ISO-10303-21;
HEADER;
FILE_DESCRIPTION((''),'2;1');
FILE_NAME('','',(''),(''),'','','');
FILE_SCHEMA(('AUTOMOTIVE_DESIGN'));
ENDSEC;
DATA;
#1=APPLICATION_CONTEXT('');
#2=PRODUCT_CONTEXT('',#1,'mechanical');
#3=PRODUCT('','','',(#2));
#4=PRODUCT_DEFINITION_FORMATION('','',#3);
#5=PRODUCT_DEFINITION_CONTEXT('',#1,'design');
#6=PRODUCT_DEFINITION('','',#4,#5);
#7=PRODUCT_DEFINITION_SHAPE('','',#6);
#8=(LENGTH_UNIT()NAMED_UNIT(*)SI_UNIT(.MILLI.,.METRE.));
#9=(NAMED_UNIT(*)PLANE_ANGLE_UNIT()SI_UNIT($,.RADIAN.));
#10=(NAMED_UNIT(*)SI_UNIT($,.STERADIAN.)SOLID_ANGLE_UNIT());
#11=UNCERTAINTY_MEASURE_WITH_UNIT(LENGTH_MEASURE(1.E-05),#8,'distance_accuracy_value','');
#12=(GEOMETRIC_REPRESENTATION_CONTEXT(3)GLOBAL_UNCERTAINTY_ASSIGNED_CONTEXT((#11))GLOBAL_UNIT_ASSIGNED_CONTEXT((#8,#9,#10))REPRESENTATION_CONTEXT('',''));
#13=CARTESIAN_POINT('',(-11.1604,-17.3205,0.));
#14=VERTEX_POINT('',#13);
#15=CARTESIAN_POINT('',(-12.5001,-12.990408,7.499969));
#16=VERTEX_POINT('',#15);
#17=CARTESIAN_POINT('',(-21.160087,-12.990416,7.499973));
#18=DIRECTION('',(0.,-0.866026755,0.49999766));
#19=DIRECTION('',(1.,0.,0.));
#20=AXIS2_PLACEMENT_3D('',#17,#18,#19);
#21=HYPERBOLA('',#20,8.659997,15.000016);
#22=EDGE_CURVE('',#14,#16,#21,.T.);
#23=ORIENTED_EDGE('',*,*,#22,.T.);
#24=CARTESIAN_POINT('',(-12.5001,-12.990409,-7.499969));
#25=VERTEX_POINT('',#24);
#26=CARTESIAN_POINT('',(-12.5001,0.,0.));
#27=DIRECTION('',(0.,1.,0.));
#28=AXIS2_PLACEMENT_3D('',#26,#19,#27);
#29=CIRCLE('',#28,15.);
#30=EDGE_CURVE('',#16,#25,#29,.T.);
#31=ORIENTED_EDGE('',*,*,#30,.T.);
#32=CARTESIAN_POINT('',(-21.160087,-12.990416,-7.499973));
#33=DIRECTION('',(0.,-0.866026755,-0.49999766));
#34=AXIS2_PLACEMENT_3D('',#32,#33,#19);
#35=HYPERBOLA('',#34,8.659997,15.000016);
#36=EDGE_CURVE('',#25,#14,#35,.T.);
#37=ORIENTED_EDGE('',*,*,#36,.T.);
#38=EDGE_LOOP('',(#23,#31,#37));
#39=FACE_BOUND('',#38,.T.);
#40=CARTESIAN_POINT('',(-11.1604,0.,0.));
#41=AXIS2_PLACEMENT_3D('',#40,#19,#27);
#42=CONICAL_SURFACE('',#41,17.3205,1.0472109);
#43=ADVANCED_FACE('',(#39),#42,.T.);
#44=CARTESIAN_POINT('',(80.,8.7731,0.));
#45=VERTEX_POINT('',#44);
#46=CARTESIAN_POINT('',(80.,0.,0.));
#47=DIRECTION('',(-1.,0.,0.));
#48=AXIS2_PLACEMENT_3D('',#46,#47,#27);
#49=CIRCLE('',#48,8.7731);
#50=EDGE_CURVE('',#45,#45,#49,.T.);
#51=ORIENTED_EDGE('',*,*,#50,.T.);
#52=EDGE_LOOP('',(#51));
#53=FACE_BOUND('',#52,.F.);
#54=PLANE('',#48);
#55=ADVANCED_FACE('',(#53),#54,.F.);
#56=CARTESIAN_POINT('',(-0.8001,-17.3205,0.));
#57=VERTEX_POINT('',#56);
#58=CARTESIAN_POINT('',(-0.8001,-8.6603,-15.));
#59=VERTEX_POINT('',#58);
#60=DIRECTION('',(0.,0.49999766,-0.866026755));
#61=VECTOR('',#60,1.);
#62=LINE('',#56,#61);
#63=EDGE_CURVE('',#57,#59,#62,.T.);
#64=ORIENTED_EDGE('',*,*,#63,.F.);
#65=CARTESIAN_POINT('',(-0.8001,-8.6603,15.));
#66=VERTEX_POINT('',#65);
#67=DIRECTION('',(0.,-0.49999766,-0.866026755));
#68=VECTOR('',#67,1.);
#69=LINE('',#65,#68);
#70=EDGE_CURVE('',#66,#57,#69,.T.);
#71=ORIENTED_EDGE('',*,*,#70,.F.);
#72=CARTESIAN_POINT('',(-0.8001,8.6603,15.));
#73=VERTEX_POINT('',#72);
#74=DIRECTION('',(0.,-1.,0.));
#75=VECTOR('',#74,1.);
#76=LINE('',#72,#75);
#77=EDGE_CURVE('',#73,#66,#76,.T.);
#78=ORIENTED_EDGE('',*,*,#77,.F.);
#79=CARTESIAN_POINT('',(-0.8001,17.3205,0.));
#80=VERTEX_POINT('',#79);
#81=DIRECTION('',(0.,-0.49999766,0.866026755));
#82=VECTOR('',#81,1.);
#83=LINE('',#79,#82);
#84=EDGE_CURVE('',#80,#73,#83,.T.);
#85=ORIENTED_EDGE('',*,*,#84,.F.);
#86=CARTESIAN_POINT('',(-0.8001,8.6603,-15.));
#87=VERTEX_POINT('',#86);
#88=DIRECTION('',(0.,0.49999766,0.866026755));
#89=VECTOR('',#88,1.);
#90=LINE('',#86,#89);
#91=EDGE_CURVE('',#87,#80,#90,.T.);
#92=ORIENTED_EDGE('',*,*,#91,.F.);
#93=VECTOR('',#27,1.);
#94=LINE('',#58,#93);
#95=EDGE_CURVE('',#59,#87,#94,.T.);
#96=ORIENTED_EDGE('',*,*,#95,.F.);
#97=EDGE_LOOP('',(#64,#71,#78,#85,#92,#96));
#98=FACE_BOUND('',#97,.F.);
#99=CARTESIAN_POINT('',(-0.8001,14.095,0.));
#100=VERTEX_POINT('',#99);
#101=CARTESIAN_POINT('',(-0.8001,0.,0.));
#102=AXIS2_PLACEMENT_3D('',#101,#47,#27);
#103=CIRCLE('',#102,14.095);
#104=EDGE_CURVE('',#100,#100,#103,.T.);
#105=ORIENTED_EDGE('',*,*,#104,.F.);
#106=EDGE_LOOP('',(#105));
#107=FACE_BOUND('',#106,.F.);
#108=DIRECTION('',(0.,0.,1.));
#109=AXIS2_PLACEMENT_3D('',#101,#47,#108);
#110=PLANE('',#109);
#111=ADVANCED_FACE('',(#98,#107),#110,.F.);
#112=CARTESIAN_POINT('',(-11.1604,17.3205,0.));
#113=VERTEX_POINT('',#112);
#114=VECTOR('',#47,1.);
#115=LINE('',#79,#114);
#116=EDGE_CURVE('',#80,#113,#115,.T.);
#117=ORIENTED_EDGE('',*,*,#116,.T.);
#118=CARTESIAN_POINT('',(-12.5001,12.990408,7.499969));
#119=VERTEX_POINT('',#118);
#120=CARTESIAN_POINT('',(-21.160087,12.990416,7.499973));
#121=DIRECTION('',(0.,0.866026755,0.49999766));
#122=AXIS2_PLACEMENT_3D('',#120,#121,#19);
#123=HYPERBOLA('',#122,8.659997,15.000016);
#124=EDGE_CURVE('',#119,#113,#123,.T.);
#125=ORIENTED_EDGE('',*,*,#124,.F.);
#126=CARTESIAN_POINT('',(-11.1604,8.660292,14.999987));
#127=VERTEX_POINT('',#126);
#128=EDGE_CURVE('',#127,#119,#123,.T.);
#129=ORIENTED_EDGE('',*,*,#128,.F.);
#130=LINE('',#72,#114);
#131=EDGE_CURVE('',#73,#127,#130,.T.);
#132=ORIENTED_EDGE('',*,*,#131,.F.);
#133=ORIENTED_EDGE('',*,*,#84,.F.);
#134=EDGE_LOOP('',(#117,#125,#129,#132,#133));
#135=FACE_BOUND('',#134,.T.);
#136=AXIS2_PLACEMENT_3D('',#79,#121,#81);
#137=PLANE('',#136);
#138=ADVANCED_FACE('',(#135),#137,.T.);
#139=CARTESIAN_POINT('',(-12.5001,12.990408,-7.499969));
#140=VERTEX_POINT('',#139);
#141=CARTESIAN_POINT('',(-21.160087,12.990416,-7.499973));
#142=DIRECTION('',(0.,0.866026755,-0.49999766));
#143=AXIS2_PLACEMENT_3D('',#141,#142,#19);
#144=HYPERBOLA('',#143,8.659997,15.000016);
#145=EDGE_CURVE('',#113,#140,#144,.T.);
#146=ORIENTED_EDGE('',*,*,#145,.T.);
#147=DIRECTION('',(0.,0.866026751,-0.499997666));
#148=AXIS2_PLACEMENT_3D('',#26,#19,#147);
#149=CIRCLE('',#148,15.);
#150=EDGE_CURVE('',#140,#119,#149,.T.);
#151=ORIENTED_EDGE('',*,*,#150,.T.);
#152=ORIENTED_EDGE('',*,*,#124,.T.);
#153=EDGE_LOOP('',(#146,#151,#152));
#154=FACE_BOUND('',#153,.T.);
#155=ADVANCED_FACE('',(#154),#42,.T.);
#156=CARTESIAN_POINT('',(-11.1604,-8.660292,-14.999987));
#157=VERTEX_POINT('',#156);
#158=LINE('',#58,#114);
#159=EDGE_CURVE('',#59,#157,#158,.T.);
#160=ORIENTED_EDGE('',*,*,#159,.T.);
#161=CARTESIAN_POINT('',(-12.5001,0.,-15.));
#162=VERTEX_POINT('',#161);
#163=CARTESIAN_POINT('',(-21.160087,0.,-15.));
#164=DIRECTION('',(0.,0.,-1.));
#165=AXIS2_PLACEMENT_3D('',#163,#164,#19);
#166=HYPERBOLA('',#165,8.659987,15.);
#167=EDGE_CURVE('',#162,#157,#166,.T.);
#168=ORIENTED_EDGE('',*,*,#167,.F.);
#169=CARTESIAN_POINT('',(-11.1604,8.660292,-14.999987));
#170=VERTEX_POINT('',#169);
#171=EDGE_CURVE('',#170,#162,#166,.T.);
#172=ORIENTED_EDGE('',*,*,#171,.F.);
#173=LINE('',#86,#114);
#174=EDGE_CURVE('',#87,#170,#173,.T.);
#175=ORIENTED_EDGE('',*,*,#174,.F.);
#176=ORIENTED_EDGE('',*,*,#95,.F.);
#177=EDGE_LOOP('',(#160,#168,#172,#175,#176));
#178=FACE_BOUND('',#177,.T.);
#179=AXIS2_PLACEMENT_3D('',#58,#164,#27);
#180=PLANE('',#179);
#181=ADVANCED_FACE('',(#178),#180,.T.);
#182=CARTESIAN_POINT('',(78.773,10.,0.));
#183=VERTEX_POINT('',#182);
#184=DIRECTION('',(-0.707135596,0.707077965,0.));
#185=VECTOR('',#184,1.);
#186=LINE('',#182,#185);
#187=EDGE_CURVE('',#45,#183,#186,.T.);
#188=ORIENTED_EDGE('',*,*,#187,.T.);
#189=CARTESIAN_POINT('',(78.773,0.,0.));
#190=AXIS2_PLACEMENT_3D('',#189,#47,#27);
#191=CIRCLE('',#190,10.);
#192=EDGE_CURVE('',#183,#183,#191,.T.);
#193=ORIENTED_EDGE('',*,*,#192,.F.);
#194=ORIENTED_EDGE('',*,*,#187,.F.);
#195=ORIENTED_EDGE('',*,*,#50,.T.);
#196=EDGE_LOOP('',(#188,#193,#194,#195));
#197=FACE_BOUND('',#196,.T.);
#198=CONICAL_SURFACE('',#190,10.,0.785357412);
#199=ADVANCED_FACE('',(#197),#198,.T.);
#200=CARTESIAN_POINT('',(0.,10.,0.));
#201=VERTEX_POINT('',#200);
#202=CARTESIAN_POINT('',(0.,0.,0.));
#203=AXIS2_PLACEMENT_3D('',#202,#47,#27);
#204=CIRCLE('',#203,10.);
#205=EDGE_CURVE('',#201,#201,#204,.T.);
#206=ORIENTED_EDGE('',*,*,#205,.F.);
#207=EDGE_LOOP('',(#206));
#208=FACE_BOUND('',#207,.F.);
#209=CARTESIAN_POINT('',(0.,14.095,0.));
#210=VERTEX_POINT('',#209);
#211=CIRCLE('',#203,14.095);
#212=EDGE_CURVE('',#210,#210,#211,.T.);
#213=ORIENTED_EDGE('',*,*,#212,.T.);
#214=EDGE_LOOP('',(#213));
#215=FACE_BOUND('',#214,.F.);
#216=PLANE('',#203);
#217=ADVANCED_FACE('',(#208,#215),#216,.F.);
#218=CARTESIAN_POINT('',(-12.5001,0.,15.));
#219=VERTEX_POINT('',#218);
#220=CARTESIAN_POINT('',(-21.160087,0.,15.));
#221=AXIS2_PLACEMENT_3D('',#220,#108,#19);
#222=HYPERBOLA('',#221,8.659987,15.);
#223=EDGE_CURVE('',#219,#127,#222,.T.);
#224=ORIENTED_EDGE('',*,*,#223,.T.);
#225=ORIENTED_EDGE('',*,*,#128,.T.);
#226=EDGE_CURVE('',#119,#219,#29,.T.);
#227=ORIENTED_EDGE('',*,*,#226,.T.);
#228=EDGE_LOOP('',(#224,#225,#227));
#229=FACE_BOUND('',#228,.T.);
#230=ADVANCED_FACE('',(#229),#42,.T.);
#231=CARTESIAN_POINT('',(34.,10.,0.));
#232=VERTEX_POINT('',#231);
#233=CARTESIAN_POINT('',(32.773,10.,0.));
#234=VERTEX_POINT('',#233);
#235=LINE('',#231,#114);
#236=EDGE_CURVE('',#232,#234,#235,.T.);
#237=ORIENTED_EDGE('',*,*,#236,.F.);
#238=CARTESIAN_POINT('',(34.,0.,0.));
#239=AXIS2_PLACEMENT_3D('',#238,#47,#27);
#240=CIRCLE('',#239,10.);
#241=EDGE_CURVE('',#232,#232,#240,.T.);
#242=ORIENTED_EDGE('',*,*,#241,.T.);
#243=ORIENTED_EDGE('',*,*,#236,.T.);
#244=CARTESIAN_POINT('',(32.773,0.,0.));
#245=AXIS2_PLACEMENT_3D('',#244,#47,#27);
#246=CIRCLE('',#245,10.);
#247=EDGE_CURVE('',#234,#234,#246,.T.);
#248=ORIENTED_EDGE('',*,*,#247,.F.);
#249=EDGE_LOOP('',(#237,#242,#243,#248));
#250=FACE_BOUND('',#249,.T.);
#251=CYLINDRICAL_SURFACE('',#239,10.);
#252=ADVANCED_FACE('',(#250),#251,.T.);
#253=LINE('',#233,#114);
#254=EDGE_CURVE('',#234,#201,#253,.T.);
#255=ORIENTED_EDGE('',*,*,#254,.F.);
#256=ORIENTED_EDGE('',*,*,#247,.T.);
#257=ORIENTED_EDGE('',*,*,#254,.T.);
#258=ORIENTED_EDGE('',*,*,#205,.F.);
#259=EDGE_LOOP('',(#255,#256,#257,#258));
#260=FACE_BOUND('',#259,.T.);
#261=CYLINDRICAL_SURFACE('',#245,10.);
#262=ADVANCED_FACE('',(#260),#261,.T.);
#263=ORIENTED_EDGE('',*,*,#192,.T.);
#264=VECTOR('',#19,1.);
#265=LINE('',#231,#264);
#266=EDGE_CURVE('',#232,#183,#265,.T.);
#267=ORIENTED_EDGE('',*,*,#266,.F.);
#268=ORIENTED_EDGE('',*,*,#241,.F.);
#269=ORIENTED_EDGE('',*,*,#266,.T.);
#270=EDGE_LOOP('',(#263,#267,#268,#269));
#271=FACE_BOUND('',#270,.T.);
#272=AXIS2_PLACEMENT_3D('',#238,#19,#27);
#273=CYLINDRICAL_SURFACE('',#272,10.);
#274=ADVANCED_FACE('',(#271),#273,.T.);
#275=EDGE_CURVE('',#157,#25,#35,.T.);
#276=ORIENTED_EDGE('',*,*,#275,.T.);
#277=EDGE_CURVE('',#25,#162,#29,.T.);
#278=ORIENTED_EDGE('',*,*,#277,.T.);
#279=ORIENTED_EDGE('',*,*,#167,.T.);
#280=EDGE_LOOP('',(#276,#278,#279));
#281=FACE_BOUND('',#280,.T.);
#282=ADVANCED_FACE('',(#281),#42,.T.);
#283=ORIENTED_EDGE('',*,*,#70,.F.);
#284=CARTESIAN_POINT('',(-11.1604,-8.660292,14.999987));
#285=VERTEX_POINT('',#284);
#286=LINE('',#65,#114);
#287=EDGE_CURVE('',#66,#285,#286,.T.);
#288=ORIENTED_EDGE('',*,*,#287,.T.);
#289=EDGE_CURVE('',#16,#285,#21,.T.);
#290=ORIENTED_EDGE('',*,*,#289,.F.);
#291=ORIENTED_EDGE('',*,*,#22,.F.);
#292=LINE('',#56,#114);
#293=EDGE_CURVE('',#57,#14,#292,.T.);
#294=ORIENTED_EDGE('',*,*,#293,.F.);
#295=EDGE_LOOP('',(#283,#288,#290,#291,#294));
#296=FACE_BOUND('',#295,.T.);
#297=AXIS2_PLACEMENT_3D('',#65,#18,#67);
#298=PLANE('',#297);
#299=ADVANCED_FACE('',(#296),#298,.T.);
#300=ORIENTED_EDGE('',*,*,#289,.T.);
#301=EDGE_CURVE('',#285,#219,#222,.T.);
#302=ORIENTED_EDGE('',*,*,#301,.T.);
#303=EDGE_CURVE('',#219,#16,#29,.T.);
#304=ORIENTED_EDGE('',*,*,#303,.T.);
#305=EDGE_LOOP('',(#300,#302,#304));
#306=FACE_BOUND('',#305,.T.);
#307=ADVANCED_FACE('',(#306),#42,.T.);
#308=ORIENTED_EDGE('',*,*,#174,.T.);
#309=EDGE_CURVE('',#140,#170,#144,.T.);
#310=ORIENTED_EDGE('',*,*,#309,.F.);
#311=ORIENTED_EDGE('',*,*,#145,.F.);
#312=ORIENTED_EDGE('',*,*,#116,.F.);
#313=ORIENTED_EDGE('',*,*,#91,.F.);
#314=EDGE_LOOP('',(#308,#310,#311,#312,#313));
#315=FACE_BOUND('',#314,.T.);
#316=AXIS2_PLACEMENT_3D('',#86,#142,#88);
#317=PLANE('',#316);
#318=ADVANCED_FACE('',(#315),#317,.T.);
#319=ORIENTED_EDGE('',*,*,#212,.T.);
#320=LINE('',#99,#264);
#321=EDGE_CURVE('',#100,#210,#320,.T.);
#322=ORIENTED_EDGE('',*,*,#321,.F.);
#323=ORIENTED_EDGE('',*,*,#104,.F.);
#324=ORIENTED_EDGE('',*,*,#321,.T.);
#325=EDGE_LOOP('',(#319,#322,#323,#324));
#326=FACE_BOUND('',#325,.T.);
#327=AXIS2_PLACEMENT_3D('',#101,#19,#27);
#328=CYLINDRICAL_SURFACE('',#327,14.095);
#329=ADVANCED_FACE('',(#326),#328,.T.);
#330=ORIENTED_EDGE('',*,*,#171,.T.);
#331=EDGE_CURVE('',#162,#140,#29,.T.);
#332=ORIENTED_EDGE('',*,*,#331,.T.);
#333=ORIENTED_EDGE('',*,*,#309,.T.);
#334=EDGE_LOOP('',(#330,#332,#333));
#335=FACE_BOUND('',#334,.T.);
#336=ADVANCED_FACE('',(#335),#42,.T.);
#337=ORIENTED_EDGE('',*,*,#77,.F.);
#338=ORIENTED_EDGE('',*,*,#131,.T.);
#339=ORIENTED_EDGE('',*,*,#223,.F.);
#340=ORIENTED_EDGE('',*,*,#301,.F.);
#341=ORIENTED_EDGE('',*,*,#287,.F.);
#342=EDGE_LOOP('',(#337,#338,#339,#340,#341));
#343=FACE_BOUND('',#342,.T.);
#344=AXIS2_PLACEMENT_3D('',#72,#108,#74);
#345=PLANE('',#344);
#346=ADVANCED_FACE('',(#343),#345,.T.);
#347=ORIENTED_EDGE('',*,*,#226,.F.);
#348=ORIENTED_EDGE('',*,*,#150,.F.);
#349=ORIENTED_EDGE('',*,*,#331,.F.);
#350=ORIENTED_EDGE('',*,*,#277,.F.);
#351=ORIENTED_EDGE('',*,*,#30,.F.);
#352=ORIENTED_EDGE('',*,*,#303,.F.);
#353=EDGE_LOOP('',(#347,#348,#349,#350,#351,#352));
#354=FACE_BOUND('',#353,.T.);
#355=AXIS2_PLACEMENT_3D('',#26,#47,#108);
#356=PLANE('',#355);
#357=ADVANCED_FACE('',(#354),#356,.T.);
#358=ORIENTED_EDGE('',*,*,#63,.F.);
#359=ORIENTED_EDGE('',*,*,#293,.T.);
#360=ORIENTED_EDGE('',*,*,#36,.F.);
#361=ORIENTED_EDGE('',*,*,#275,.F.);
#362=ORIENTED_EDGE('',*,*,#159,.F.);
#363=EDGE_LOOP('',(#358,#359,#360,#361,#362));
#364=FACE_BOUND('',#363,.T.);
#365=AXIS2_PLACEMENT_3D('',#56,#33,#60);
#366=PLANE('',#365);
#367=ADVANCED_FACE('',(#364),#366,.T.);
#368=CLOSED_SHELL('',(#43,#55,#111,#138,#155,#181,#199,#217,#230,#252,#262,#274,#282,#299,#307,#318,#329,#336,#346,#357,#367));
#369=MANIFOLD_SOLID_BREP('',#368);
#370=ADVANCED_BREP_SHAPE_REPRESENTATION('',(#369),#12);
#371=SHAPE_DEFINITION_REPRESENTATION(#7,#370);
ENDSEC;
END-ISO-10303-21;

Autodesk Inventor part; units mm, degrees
ref_plane "YZ Plane" through (0, 0, 0) normal (1, 0, 0) x (0, 1, 0)
ref_plane "XZ Plane" through (0, 0, 0) normal (0, 1, 0) x (-1, 0, 0)
sketch "Sketch1" plane through (0, 0, 0) normal (0, 0, 1) x (1, 0, 0)
  line L0 (0, 14.095) -> (0, 10)
  line L1 (34, 10) -> (80, 10)
  line L2 (80, 10) -> (80, 0)
  line L3 (80, 0) -> (-0.8001, 0)
  line L4 (-16.9601, 0) -> (96.16, 0) projected
  line L5 (-0.8001, 0) -> (-0.8001, 14.095)
  line L6 (-0.8001, 14.095) -> (0, 14.095)
  line L7 (34, 10) -> (32.773, 10)
  line L8 (32.773, 10) -> (0, 10)
  line L9 (0, -2.819) -> (0, 16.914) projected
  dimension "d0" = 80
  dimension "d1" = 46
  dimension "d2" = 20
  dimension "d9" = 0.8001
  dimension "d10" = 28.19
  dimension "d13" = 1.227
  dimension "d14" = 20
revolve "Body" add sketch "Sketch1" angle 360 about axis through (80, 0, 0) along (-1, 0, 0)
sketch "Sketch2" plane through (-0.8001, 0, 0) normal (-1, 0, 0) x (0, 0, 1)
  line L0 (0, 17.3205) -> (15, 8.6603)
  line L1 (15, 8.6603) -> (15, -8.6603)
  line L2 (15, -8.6603) -> (0, -17.3205)
  line L3 (0, -17.3205) -> (-15, -8.6603)
  line L4 (-15, -8.6603) -> (-15, 8.6603)
  line L5 (-15, 8.6603) -> (0, 17.3205)
  point P0 (0, 0)
  point P1 (0, 0)
  dimension "d11" = 30
extrude "Head" add sketch "Sketch2" along normal blind 11.7
sketch "Sketch4" plane through (0, 0, 0) normal (0, 0, 1) x (1, 0, 0)
  line L0 (-12.5001, 15) -> (-12.5001, 17.3205)
  line L1 (-12.5001, 17.3205) -> (-11.1604, 17.3205)
  line L2 (-11.1604, 17.3205) -> (-12.5001, 15)
  line L3 (-14.8401, 0) -> (1.5399, 0) projected
  line L4 (-0.8001, 17.3205) -> (-12.5001, 17.3205) projected
  line L5 (-12.5001, 8.6603) -> (-12.5001, 17.3205) projected
  dimension "d5" = 30
  dimension "d19" = 30
revolve "Chamfer1" cut sketch "Sketch4" angle 360 about axis through (-10, 0, 0) along (1, 0, 0)
thread "Thread" size "M20x2" class "6g" standard "ISO Metric profile" length 46
chamfer "Chamfer2" distance 1.2269 distance2 1.227 1 edges at (80, -10, 0) measured on face at (80, -2.8768, 3.7595)
ref_plane "Work Plane1" through (1.525, 0, 0) normal (0, 0, 1) x (1, 0, 0)
equation "\"d0\" = NLG"
equation "\"d1\" = GEL"
equation "\"d2\" = GD"
equation "\"d10\" = SD2"
equation "\"d14\" = BDM"
equation "\"d11\" = SW"
equation "\"d3\" = KOH - SD"
equation "\"d5\" = ANG1"
equation "\"d19\" = SW0"
equation "\"d15\" = GEL"
equation "\"d6\" = -0.5 * SPD + 0.5 * GD"
equation "\"NLG\" = 80"
equation "\"GD\" = NND"
equation "\"BDM\" = NND"
equation "\"KOH\" = 12.5"
equation "\"GEL\" = 46"
equation "\"SW\" = 30"
equation "\"SW0\" = SW"
equation "\"SPD\" = NND - 1.2269 * PTC"
equation "\"SD2\" = 28.19"
equation "\"SD\" = 0.8"
equation "\"ANG1\" = 30deg"
equation "\"GAL\" = 0.61345 * PTC"
equation "\"GUL\" = 0.61345 * PTC"
equation "\"RR\" = 0.8"
equation "\"GD1\" = THREADDIA - 1.2269 * PTC"
equation "\"SDH\" = SD2"
equation "\"TOA\" = 30deg"
equation "\"PTC\" = 2"
equation "\"E0\" = 1.155 * SW"
equation "\"NND\" = 20"
equation "\"THREADDIA\" = 20"
properties part number "ISO 8765 - M20 x 2 x 80" material "Stainless Steel, 440C"
